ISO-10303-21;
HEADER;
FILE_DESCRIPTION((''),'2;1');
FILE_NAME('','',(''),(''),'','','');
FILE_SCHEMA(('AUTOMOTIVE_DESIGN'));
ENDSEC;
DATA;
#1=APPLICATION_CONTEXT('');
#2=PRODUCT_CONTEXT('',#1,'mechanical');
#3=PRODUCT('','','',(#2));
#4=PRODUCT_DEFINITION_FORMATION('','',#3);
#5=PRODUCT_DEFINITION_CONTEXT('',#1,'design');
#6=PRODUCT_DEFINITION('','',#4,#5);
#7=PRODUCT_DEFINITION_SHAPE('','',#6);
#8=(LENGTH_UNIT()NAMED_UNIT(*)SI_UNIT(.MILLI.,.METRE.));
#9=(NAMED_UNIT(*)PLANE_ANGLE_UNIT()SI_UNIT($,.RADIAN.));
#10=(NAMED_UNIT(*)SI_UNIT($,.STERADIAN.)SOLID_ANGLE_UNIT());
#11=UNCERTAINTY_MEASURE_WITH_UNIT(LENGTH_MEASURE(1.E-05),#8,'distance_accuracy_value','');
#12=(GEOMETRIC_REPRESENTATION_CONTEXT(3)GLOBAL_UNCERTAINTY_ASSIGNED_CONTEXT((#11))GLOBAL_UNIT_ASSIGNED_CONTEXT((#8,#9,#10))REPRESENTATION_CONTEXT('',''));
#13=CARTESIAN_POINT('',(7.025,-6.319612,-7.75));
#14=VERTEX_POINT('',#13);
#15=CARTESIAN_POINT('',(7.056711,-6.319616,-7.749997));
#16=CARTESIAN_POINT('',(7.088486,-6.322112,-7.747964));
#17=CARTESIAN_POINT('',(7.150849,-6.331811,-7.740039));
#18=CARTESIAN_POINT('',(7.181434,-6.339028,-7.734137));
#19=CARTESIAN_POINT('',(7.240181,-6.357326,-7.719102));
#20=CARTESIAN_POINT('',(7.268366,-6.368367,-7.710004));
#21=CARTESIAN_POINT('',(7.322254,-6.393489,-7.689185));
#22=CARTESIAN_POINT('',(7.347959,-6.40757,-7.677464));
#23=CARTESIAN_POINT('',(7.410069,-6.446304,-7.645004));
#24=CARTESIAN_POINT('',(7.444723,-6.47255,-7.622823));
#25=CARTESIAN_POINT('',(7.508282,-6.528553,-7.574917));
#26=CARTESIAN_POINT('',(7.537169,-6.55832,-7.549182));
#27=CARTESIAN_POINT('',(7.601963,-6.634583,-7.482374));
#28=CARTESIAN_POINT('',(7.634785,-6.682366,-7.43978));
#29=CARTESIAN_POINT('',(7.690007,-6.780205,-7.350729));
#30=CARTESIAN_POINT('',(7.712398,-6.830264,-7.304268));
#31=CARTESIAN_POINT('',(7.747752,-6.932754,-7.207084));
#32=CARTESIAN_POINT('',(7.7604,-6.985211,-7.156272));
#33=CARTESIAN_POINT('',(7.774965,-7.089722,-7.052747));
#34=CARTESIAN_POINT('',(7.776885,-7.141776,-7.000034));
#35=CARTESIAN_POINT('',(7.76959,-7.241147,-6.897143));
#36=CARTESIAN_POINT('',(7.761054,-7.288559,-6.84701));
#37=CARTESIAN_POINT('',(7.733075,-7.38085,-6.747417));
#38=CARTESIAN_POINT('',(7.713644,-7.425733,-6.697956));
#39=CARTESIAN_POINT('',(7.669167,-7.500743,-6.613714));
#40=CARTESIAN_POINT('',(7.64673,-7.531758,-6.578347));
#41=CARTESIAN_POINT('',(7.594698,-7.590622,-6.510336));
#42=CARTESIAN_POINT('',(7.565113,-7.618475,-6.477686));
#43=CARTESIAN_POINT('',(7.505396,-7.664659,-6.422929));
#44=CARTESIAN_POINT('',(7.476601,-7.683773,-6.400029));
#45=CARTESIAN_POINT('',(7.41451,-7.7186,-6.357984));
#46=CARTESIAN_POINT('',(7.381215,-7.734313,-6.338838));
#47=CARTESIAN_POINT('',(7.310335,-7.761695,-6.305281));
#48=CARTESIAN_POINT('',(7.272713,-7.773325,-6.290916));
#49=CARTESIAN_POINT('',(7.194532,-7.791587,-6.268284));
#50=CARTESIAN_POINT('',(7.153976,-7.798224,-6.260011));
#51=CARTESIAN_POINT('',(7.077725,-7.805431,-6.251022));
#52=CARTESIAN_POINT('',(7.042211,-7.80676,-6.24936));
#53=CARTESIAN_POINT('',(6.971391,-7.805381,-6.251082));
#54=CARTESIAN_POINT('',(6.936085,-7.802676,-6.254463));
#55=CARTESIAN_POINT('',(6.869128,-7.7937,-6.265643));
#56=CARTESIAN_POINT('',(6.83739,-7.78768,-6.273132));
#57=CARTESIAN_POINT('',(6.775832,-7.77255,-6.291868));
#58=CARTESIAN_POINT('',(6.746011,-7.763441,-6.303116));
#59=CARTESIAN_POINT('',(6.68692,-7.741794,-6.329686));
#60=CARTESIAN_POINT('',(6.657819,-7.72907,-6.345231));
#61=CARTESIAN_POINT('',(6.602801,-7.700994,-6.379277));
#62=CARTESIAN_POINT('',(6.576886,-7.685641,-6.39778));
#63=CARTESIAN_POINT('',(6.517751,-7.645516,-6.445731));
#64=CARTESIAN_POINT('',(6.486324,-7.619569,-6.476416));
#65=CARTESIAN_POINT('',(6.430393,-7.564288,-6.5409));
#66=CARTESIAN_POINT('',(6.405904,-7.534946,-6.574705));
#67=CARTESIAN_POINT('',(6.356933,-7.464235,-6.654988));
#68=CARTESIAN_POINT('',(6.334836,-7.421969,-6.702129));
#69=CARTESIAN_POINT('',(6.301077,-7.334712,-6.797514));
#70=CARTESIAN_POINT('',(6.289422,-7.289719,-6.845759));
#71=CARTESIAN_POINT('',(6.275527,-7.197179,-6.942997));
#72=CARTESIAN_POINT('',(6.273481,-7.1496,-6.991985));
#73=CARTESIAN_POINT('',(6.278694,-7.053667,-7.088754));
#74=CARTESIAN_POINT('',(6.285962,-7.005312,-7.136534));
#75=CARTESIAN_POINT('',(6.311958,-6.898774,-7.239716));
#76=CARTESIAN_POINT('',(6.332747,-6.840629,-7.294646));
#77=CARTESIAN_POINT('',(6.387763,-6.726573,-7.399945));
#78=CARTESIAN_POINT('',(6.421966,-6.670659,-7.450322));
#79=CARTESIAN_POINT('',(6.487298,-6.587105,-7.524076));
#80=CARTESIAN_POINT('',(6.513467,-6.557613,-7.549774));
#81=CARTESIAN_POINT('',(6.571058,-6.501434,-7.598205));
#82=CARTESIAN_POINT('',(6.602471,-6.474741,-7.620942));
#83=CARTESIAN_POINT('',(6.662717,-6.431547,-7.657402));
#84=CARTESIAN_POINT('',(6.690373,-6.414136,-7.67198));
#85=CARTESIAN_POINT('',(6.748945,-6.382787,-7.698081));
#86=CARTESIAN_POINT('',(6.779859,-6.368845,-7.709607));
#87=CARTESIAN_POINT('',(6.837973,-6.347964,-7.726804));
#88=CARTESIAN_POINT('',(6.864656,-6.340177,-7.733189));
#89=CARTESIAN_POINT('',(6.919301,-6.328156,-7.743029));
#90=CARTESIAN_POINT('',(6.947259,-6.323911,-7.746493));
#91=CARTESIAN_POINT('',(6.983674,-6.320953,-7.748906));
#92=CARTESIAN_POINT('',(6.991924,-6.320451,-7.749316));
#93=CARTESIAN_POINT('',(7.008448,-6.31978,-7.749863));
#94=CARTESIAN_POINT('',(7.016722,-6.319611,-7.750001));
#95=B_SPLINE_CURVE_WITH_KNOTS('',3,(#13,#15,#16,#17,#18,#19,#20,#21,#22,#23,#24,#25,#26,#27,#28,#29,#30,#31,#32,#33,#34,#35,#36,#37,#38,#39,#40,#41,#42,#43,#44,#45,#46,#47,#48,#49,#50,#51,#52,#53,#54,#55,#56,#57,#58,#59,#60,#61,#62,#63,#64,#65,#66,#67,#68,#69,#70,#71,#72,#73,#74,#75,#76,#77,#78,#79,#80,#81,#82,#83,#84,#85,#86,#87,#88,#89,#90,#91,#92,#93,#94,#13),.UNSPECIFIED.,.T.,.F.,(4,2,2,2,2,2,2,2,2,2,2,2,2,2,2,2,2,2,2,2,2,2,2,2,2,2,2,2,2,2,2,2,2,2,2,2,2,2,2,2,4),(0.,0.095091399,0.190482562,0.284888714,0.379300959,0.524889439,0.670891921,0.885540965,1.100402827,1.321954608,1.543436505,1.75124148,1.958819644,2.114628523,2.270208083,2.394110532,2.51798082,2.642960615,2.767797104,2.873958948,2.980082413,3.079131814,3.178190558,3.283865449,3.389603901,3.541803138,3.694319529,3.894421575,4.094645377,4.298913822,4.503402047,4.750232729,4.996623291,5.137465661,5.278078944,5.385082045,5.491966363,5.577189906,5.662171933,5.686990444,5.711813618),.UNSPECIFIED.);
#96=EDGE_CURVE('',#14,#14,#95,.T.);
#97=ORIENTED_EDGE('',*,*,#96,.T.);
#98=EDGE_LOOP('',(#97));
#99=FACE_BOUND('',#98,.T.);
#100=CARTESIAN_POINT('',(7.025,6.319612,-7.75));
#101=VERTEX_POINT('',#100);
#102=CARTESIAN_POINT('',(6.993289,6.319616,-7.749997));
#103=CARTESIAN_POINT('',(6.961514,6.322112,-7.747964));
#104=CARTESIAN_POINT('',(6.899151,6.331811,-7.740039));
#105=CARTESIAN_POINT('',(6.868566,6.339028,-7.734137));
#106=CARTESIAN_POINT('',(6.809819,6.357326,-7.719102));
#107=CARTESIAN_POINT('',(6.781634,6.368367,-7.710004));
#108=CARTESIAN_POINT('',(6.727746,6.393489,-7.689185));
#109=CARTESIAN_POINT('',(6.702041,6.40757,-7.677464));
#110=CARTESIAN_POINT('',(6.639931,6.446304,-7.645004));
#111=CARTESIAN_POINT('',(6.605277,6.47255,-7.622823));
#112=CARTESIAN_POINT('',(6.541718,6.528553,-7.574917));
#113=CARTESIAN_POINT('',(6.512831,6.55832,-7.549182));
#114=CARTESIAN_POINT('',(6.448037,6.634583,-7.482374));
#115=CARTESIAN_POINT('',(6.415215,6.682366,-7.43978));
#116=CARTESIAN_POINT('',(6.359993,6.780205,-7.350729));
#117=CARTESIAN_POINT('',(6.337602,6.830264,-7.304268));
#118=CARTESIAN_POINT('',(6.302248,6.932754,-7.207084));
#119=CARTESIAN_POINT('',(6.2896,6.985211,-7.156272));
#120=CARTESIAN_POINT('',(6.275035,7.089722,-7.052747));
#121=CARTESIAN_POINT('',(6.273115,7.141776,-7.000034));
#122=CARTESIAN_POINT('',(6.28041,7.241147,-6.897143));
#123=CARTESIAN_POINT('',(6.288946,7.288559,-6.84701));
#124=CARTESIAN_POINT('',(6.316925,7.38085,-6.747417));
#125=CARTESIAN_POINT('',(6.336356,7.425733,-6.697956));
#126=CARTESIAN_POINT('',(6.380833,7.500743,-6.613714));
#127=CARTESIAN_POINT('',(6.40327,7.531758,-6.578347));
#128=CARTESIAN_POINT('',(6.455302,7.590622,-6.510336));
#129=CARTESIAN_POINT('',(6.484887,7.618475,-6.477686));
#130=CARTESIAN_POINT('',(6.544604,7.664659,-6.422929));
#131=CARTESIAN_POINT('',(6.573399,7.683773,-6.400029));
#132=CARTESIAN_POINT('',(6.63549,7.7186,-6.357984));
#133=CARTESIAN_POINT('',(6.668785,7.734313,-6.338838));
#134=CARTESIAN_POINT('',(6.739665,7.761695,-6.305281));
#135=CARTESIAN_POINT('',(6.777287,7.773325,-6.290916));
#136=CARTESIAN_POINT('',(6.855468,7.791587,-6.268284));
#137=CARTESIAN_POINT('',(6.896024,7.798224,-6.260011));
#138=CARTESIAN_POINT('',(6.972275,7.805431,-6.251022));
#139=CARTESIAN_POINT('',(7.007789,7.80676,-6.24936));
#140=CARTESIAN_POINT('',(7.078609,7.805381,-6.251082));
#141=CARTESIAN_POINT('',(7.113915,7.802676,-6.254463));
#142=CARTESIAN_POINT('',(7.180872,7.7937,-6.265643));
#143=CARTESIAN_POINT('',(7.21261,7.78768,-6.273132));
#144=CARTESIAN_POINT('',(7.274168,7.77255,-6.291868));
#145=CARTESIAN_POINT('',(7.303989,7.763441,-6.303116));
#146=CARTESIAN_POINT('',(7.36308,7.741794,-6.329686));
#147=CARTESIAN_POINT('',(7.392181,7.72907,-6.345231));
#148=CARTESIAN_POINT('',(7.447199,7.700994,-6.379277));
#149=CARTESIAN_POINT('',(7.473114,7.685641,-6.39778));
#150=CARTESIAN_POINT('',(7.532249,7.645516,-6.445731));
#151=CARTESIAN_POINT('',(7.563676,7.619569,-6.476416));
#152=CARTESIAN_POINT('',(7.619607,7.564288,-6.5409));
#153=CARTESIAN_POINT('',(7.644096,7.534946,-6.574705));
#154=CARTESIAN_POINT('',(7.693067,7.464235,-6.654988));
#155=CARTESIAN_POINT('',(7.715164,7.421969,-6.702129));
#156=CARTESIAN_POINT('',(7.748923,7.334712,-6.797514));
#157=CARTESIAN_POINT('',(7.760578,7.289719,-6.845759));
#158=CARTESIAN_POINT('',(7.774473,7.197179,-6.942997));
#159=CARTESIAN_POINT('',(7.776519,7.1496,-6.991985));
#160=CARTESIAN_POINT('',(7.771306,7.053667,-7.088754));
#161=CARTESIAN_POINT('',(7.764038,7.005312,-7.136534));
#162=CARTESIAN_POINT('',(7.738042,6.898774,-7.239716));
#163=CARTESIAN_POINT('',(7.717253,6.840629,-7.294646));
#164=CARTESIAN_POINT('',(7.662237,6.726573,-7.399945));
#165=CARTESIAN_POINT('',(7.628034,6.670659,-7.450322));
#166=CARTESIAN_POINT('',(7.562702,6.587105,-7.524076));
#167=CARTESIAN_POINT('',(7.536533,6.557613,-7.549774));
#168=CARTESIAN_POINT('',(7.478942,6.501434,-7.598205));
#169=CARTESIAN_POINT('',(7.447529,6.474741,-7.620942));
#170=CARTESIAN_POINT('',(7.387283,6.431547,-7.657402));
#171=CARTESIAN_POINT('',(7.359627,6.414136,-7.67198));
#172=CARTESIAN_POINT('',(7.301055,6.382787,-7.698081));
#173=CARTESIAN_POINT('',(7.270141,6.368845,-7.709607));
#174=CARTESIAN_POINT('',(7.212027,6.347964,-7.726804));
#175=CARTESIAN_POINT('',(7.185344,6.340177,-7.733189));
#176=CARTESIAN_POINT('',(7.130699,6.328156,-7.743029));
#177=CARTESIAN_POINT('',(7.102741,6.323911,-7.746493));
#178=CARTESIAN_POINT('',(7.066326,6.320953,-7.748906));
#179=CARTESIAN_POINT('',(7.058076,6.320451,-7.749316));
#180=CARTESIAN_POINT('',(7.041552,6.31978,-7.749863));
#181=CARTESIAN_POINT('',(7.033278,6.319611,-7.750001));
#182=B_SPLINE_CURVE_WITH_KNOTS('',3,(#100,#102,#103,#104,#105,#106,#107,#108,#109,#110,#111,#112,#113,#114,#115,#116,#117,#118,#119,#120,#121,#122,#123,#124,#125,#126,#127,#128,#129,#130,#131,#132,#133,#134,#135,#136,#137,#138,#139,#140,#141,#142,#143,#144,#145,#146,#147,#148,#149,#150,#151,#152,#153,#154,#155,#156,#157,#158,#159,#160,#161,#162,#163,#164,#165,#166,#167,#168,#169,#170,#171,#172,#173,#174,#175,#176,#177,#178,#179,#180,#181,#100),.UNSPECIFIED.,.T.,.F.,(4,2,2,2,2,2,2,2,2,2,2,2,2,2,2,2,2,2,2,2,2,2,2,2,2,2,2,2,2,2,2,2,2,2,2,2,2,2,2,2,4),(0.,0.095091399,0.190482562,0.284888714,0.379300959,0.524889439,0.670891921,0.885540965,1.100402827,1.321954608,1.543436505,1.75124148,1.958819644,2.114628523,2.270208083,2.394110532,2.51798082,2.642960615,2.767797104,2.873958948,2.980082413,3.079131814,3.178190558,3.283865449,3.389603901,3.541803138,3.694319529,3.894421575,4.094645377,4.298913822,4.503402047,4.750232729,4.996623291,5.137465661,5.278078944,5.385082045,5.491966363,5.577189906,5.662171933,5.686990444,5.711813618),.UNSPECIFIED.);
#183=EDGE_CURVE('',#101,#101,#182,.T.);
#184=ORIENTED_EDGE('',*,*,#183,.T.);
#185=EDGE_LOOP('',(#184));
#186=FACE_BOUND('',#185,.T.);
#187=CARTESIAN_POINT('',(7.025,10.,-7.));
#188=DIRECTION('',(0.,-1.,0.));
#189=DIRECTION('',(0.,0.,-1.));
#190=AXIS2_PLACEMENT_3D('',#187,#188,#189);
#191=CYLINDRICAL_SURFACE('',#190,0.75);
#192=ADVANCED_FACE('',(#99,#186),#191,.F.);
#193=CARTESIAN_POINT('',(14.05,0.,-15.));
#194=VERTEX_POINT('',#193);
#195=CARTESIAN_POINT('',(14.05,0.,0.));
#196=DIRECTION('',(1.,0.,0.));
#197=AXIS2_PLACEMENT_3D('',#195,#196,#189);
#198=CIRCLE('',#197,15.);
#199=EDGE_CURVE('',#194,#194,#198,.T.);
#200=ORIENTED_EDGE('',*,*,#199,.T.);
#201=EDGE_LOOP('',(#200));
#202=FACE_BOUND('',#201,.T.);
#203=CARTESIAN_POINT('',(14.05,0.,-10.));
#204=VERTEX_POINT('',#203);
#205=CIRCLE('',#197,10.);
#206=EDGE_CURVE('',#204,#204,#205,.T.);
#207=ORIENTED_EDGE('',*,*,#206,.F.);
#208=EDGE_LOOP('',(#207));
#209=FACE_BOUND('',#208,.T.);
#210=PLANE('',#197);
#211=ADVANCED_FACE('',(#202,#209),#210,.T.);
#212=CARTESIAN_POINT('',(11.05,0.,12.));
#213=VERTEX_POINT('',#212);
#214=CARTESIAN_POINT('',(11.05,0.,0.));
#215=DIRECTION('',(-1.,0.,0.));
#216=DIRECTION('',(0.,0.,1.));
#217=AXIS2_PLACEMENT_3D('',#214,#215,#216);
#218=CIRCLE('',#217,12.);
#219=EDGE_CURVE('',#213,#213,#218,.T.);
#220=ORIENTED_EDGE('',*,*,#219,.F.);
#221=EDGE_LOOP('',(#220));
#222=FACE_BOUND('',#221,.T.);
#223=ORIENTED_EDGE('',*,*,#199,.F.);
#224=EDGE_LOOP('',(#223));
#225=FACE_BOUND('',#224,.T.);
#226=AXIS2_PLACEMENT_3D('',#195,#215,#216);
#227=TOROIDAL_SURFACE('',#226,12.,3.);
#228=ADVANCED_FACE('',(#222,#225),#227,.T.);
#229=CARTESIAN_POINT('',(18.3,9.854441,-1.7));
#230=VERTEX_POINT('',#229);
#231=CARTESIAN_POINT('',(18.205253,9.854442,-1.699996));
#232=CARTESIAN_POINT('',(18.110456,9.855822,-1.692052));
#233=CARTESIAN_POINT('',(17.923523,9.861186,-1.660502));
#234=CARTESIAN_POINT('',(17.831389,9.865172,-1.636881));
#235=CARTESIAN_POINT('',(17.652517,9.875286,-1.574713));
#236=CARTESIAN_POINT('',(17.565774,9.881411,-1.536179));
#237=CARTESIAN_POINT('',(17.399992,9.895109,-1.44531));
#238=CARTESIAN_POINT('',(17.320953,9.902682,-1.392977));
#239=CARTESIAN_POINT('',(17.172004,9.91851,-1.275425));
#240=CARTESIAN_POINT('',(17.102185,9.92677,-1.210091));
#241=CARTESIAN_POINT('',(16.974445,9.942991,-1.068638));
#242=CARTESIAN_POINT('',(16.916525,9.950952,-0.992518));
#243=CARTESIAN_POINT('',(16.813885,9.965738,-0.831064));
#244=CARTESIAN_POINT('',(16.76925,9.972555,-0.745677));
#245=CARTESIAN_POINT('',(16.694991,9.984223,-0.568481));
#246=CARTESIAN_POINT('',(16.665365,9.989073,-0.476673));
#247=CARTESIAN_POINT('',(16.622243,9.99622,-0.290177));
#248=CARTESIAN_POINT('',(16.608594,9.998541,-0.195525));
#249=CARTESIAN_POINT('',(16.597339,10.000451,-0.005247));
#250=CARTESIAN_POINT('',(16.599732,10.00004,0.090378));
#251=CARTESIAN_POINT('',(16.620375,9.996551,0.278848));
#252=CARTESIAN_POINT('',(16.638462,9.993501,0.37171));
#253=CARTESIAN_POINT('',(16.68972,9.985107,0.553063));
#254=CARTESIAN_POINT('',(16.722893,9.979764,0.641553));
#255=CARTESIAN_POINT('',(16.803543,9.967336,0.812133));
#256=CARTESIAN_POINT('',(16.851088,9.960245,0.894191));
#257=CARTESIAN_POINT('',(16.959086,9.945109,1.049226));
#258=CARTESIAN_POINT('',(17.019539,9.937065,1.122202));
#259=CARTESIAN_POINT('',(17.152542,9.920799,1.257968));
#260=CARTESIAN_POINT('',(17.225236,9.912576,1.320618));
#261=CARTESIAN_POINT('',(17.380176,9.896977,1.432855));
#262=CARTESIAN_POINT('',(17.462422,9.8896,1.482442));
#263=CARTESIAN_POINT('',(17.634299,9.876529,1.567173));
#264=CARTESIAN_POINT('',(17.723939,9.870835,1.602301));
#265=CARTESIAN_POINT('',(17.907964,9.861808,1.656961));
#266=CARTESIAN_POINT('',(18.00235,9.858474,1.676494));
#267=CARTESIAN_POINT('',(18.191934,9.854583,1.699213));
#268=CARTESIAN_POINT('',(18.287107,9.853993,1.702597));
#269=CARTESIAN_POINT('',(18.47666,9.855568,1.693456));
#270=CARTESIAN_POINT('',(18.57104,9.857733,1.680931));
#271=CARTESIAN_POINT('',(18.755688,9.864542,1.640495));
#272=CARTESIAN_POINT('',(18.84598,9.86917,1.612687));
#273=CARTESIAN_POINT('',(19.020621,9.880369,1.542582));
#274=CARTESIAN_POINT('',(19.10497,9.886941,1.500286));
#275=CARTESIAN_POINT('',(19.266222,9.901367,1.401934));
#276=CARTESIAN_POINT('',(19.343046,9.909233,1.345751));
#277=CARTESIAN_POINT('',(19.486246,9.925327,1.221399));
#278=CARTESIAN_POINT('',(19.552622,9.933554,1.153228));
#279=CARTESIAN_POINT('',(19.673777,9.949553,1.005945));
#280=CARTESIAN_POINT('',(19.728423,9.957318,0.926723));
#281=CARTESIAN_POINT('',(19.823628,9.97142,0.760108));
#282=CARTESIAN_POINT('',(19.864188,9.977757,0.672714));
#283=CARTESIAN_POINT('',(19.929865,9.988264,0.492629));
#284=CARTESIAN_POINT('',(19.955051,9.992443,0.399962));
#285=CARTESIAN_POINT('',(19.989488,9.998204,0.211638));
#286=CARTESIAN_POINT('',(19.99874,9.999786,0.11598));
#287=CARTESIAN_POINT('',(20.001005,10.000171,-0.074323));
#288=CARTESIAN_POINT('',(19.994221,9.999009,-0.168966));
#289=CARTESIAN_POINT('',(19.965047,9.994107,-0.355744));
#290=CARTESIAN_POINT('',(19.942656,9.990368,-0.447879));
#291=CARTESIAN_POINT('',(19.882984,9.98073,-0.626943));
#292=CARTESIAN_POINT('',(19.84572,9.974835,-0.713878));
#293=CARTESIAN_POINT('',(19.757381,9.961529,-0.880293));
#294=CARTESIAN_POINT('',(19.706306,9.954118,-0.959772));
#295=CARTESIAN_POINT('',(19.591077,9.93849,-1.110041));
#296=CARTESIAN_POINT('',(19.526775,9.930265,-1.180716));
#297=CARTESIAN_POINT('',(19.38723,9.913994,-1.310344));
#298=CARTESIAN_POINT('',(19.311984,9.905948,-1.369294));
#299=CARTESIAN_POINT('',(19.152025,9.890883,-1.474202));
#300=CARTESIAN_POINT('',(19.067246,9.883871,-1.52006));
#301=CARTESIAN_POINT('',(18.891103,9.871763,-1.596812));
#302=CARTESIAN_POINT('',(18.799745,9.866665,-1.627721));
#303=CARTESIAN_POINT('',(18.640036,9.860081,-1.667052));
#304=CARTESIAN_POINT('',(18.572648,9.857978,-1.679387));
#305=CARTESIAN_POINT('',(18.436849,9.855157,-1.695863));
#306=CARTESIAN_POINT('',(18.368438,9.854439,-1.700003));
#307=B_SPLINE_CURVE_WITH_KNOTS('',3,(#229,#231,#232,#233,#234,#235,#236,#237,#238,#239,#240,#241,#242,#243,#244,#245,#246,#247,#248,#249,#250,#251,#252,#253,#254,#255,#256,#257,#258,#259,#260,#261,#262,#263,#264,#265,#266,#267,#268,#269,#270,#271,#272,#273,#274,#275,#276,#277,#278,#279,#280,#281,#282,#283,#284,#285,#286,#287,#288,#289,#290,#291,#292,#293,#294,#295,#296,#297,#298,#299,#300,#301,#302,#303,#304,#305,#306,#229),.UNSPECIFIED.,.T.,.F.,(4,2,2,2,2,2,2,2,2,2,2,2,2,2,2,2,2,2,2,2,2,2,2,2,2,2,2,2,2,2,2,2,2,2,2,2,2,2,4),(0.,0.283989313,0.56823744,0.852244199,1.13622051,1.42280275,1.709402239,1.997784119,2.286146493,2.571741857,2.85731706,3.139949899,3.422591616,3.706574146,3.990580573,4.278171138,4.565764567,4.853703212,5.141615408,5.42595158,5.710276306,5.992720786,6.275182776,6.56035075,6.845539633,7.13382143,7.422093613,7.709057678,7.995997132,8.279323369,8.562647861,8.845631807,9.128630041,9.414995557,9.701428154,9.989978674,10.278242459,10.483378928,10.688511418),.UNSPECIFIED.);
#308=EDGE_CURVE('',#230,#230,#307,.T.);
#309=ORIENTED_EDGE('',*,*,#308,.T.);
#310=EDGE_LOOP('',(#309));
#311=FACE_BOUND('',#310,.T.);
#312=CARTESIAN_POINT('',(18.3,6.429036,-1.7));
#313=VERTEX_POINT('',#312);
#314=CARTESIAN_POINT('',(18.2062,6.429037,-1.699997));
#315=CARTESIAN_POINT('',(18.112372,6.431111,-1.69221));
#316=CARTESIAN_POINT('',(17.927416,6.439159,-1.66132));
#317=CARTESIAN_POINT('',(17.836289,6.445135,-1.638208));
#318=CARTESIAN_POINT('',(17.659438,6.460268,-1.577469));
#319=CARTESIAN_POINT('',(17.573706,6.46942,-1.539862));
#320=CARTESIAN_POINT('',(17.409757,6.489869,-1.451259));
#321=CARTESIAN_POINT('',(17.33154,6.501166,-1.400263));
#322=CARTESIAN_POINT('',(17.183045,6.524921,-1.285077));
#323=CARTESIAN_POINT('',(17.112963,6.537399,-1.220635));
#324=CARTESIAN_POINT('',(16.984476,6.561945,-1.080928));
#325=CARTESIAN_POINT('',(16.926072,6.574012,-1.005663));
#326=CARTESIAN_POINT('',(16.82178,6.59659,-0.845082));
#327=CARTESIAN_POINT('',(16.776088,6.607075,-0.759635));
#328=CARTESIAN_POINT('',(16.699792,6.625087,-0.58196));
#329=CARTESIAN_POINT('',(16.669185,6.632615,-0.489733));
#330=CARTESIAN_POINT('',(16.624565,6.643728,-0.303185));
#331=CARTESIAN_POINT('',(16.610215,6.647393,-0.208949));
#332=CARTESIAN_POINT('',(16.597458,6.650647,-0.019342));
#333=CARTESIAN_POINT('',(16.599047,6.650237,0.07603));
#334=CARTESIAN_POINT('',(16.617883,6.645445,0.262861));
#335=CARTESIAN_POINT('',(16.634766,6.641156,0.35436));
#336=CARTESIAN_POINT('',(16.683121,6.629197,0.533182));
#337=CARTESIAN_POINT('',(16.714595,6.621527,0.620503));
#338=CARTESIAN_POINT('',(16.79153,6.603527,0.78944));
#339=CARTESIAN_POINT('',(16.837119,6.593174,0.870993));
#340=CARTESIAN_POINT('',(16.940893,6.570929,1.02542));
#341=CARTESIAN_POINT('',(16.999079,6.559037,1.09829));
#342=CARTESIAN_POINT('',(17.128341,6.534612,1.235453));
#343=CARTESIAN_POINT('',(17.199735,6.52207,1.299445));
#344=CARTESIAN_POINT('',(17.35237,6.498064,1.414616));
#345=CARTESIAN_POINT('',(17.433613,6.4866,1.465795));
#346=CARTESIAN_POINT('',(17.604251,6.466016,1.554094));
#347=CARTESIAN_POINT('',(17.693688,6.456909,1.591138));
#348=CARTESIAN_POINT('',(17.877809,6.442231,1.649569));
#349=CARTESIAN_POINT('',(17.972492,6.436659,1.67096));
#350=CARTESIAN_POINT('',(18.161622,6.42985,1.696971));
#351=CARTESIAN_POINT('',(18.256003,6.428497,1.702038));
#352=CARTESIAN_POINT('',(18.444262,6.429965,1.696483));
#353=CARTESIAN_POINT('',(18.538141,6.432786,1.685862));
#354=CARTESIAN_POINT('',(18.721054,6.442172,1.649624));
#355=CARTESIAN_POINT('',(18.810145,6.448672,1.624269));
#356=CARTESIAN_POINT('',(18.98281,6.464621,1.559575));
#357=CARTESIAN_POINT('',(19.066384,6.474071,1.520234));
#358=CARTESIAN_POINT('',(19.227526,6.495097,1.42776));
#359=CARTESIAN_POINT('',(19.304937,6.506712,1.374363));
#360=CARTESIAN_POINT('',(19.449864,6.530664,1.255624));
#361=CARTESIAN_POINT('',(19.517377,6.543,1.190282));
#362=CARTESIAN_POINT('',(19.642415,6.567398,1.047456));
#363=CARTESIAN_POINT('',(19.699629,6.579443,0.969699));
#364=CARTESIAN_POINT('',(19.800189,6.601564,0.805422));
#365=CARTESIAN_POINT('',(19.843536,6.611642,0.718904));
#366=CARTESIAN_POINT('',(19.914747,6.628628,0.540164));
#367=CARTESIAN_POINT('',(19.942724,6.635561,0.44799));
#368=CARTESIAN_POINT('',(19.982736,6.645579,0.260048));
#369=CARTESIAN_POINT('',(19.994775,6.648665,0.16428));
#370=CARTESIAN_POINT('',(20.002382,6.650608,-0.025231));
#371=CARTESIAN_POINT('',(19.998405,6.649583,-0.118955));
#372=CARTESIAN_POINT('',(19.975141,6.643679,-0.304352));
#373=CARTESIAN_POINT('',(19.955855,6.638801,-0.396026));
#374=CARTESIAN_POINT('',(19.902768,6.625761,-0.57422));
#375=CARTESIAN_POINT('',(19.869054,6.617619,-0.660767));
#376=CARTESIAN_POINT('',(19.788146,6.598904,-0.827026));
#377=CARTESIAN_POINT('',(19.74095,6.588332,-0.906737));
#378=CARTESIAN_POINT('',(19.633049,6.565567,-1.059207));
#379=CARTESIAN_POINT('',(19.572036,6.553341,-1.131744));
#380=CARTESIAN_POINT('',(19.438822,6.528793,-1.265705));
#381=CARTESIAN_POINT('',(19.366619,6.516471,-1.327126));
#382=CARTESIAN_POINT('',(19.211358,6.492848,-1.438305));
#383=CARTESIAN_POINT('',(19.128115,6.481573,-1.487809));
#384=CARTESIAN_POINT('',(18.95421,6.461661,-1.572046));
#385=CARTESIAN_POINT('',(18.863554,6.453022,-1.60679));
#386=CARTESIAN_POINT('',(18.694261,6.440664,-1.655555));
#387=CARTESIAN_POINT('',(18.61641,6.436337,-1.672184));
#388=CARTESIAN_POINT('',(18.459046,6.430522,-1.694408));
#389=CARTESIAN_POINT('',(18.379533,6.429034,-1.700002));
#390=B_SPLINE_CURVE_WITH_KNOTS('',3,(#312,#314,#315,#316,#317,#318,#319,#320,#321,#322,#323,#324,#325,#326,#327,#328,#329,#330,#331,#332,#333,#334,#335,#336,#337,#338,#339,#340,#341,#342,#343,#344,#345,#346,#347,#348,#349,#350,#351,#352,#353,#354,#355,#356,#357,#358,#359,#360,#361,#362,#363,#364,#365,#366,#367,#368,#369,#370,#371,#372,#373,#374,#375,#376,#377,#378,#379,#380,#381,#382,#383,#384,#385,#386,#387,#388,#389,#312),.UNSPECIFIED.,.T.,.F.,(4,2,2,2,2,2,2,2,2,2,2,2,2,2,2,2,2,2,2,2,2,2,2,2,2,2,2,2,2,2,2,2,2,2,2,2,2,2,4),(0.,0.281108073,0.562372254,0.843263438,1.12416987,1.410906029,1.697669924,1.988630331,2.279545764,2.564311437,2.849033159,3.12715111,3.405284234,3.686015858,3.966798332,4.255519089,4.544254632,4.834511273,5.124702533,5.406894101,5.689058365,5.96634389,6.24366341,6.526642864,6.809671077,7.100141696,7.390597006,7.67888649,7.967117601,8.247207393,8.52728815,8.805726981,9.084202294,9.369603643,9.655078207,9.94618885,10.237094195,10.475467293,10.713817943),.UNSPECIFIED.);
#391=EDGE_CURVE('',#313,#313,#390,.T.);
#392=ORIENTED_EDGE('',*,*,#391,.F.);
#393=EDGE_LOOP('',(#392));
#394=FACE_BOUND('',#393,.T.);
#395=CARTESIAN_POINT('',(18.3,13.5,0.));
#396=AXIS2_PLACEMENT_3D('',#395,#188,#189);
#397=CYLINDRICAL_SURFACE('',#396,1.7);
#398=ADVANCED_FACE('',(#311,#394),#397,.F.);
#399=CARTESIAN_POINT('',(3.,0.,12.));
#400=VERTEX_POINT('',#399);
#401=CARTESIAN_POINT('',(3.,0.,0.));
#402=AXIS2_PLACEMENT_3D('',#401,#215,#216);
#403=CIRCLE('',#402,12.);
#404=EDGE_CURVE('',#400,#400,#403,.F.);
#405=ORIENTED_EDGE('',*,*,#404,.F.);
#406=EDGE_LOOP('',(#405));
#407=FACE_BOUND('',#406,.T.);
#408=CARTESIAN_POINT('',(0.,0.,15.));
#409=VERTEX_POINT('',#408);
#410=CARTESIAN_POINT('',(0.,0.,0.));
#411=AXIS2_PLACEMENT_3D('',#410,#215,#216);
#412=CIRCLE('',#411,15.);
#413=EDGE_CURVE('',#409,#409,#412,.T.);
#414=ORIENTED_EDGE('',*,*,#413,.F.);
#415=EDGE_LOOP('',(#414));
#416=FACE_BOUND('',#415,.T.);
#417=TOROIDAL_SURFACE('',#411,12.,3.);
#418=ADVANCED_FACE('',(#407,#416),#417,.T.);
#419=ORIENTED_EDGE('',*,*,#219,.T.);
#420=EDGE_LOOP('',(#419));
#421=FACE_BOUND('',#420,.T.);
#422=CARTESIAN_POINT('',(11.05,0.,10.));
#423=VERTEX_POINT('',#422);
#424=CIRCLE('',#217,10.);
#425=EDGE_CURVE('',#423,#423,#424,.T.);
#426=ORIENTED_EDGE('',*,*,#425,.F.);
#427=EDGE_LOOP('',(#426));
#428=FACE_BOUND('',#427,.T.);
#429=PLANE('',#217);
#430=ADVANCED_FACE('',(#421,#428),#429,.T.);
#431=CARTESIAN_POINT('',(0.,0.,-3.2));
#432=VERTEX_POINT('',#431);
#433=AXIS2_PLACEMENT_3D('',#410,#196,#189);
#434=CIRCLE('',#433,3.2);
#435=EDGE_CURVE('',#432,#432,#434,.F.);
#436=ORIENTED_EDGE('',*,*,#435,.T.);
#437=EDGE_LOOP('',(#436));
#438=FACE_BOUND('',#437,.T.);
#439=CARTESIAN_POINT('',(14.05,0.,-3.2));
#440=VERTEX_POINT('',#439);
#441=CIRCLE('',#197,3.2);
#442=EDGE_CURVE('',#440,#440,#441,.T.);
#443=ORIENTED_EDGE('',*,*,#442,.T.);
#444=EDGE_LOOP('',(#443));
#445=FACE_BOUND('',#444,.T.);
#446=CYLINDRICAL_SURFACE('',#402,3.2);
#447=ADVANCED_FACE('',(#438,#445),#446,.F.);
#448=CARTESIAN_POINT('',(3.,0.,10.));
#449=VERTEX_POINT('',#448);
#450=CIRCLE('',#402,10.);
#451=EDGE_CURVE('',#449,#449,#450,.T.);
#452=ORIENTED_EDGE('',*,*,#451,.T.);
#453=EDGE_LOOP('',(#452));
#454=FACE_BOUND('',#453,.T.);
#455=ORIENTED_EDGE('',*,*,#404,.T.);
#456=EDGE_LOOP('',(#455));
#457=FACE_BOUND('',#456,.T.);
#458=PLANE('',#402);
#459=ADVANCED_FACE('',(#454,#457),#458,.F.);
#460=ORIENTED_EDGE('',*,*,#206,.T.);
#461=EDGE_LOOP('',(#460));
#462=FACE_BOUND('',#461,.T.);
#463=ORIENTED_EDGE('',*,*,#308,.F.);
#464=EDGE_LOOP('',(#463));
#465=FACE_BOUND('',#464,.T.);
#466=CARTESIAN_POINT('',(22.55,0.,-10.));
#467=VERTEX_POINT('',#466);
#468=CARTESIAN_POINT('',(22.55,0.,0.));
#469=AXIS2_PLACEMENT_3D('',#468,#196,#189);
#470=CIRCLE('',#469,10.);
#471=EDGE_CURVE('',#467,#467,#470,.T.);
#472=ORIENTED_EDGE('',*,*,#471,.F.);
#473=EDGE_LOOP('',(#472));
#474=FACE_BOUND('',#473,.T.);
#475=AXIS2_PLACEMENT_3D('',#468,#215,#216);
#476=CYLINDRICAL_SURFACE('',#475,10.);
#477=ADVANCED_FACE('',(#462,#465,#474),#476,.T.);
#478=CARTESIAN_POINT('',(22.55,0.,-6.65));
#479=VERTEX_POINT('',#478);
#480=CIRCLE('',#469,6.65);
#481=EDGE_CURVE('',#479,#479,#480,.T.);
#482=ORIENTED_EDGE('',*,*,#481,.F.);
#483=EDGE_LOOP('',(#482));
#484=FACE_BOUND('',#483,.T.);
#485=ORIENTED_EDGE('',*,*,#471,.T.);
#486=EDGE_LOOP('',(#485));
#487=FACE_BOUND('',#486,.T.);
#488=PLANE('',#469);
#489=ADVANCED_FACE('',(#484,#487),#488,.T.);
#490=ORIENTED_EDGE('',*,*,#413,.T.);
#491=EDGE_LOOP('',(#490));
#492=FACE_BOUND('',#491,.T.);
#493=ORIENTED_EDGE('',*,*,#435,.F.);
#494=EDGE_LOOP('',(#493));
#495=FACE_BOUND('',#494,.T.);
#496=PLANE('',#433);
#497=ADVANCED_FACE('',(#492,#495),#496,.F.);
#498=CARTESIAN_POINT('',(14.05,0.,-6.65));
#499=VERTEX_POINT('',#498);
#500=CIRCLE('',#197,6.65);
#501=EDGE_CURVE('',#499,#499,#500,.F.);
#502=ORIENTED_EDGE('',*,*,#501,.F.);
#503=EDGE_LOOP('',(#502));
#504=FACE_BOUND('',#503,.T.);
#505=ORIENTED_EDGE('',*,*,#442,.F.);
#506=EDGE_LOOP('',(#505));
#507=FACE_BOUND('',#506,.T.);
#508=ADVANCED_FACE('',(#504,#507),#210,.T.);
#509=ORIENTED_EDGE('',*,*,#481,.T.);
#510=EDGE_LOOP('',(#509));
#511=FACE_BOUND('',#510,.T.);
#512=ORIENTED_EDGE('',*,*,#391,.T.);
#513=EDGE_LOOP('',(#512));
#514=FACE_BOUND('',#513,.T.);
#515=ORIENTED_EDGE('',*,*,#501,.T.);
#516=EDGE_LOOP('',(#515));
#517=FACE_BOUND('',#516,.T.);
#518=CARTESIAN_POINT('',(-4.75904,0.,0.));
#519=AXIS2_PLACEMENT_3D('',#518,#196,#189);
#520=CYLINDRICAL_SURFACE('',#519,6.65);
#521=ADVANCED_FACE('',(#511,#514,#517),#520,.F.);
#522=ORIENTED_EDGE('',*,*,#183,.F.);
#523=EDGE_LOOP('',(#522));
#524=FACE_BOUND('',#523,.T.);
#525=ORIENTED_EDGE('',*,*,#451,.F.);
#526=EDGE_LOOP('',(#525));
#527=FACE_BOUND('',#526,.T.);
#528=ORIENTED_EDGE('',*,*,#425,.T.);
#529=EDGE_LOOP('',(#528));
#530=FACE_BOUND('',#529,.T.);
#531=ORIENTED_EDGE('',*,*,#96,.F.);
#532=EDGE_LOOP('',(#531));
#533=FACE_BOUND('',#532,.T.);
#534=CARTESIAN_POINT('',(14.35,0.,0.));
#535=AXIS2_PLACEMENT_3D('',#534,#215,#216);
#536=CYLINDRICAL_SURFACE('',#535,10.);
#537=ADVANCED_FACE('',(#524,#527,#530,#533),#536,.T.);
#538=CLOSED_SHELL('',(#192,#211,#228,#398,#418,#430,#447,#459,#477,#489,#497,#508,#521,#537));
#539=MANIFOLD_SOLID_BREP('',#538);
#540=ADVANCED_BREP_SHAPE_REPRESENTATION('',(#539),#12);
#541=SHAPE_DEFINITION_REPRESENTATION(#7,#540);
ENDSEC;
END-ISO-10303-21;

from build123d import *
from build123d.topology import SkipClean

# Parameters (mm, degrees)
EXTRUDE_3_DEPTH          = 14.35
EXTRUDE_START            = -3
EXTRUDE_7_DEPTH          = 3
EXTRUDE_8_DEPTH          = 3
EXTRUDE_START_2          = 10
EXTRUDE_9_DEPTH          = 10
EXTRUDE_10_DEPTH         = 10
CUT_EXTRUDE_1_DEPTH      = 10
CUT_EXTRUDE_2_DEPTH      = 14
FILLET_1_R               = 5
SKETCH_10_W              = 10.354719005
SKETCH_10_H              = 30
SKETCH_10_W_2            = 10.898600502
CUT_EXTRUDE_3_DEPTH      = 14
CUT_EXTRUDE_START        = -11.35
SKETCH_11_R              = 6.6
CUT_EXTRUDE_4_DEPTH      = 11.35
EXTRUDE_START_3          = -14.35
SKETCH_12_R              = 10
SKETCH_12_R_2            = 6.6
EXTRUDE_11_DEPTH         = 14.35
SKETCH_13_R              = 15
SKETCH_13_R_2            = 10
EXTRUDE_12_DEPTH         = 3
SKETCH_14_R              = 15
SKETCH_14_R_2            = 3.2
EXTRUDE_13_DEPTH         = 3
CUT_EXTRUDE_START_2      = -0.3
SKETCH_17_R              = 15
CUT_EXTRUDE_5_DEPTH      = 0.3
EXTRUDE_START_4          = 0.3
SKETCH_18_R              = 15
SKETCH_18_R_2            = 10
EXTRUDE_14_DEPTH         = 0.3
CUT_EXTRUDE_6_DEPTH      = 19.3
SKETCH_20_R              = 10
SKETCH_20_R_2            = 3.2
EXTRUDE_15_DEPTH         = 11.05
SKETCH_21_R              = 10
SKETCH_21_R_2            = 6.6
EXTRUDE_16_DEPTH         = 8.5
CUT_EXTRUDE_7_DEPTH      = 13.5
FILLET_2_R               = 3
CUT_EXTRUDE_9_DEPTH      = 10
CUT_EXTRUDE_9_DEPTH_BACK = 10
SKETCH_23_R              = 0.75
CUT_EXTRUDE_10_REACH     = 32.96
SKETCH_25_R              = 6.65


with BuildPart() as part:
    # Эскиз1 → Бобышка-Вытянуть3 (new body)
    with BuildSketch(Plane(origin=(0, 0, 0), x_dir=(0, 0, -1), z_dir=(1, 0, 0))):
        with BuildLine():
            ThreePointArc((-6.6, 0), (0, 6.6), (6.6, 0))
            Line((6.6, 0), (10, 0))
            ThreePointArc((10, 0), (0, 10), (-10, 0))
            Line((-10, 0), (-6.6, 0))
        make_face()
    extrude(amount=EXTRUDE_3_DEPTH)

    # Эскиз3 → Бобышка-Вытянуть7 (add)
    with BuildSketch(Plane(origin=(14.35, 0, 0), x_dir=(0, 0, -1), z_dir=(1, 0, 0)).offset(EXTRUDE_START)):
        with BuildLine():
            ThreePointArc((15, 0), (0, 15), (-15, 0))
            Line((-15, 0), (-10, 0))
            ThreePointArc((-10, 0), (0, 10), (10, 0))
            Line((10, 0), (15, 0))
        make_face()
        with BuildLine():
            ThreePointArc((6.6, 0), (0, 6.6), (-6.6, 0))
            Line((-6.6, 0), (-3.2, 0))
            ThreePointArc((-3.2, 0), (0, 3.2), (3.2, 0))
            Line((3.2, 0), (6.6, 0))
        make_face()
    extrude(amount=EXTRUDE_7_DEPTH)

    # Эскиз5 → Бобышка-Вытянуть8 (add)
    with BuildSketch(Plane.ZY):
        with BuildLine():
            ThreePointArc((15, 0), (0, 15), (-15, 0))
            Line((-15, 0), (-10, 0))
            ThreePointArc((-10, 0), (0, 10), (10, 0))
            Line((10, 0), (15, 0))
        make_face()
        with BuildLine():
            ThreePointArc((6.6, 0), (0, 6.6), (-6.6, 0))
            Line((-6.6, 0), (-3.2, 0))
            ThreePointArc((-3.2, 0), (0, 3.2), (3.2, 0))
            Line((3.2, 0), (6.6, 0))
        make_face()
    extrude(amount=-EXTRUDE_8_DEPTH)

    # Эскиз6 → Бобышка-Вытянуть9 (add)
    with BuildSketch(Plane.ZY.offset(EXTRUDE_START_2)):
        with BuildLine():
            ThreePointArc((-6.6, 0), (-6.41716127, 1.542738227), (-5.878775383, 3))
            Line((-5.878775383, 3), (-6.6, 3))
            Line((-6.6, 3), (-14.696938457, 3))
            Line((-14.696938457, 3), (-14.696938457, 0))
            Line((-14.696938457, 0), (-6.6, 0))
        make_face()
        with BuildLine():
            ThreePointArc((-3.2, 0), (-2.627105745, 1.827105745), (-1.113552873, 3))
            Line((-1.113552873, 3), (-5.878775383, 3))
            ThreePointArc((-5.878775383, 3), (-6.41716127, 1.542738227), (-6.6, 0))
            Line((-6.6, 0), (-3.2, 0))
        make_face()
        with BuildLine():
            Line((-5.878775383, 3), (-1.113552873, 3))
            ThreePointArc((-1.113552873, 3), (0, 3.2), (1.113552873, 3))
            Line((1.113552873, 3), (5.878775383, 3))
            ThreePointArc((5.878775383, 3), (0, 6.6), (-5.878775383, 3))
        make_face()
        with BuildLine():
            Line((5.878775383, 3), (1.113552873, 3))
            ThreePointArc((1.113552873, 3), (2.627105745, 1.827105745), (3.2, 0))
            Line((3.2, 0), (6.6, 0))
            ThreePointArc((6.6, 0), (6.41716127, 1.542738227), (5.878775383, 3))
        make_face()
        with BuildLine():
            Line((14.696938457, 3), (5.878775383, 3))
            ThreePointArc((5.878775383, 3), (6.41716127, 1.542738227), (6.6, 0))
            Line((6.6, 0), (14.696938457, 0))
            Line((14.696938457, 0), (14.696938457, 3))
        make_face()
    extrude(amount=-EXTRUDE_9_DEPTH)

    # Эскиз7 → Бобышка-Вытянуть10 (add)
    with BuildSketch(Plane(origin=(14.35, 0, 0), x_dir=(0, 0, -1), z_dir=(1, 0, 0))):
        with BuildLine():
            Line((6.6, 0), (14.696938457, 0))
            Line((14.696938457, 0), (14.696938457, 3))
            Line((14.696938457, 3), (5.878775383, 3))
            ThreePointArc((5.878775383, 3), (6.41716127, 1.542738227), (6.6, 0))
        make_face()
        with BuildLine():
            Line((3.2, 0), (6.6, 0))
            ThreePointArc((6.6, 0), (6.41716127, 1.542738227), (5.878775383, 3))
            ThreePointArc((5.878775383, 3), (0, 6.6), (-5.878775383, 3))
            ThreePointArc((-5.878775383, 3), (-6.41716127, 1.542738227), (-6.6, 0))
            Line((-6.6, 0), (-3.2, 0))
            ThreePointArc((-3.2, 0), (0, 3.2), (3.2, 0))
        make_face()
        with BuildLine():
            Line((-14.696938457, 0), (-6.6, 0))
            ThreePointArc((-6.6, 0), (-6.41716127, 1.542738227), (-5.878775383, 3))
            Line((-5.878775383, 3), (-14.696938457, 3))
            Line((-14.696938457, 3), (-14.696938457, 0))
        make_face()
    extrude(amount=EXTRUDE_10_DEPTH)

    # Эскиз8 → Вырез-Вытянуть1 (cut)
    with BuildSketch(Plane(origin=(0, 3, 0), x_dir=(1, 0, 0), z_dir=(0, 1, 0))):
        with BuildLine():
            ThreePointArc((-5, 11.98785692), (-6.7, 10.28785692), (-5, 8.58785692))
            Line((-5, 8.58785692), (-5, 11.98785692))
        make_face()
        with BuildLine():
            Line((-5, 11.98785692), (-5, 8.58785692))
            ThreePointArc((-5, 8.58785692), (-3.797918472, 9.085775392), (-3.3, 10.28785692))
            ThreePointArc((-3.3, 10.28785692), (-3.797918472, 11.489938448), (-5, 11.98785692))
        make_face()
        with BuildLine():
            ThreePointArc((21.05, 10.28785692), (20.552081528, 11.489938448), (19.35, 11.98785692))
            Line((19.35, 11.98785692), (19.35, 8.58785692))
            ThreePointArc((19.35, 8.58785692), (20.552081528, 9.085775392), (21.05, 10.28785692))
        make_face()
        with BuildLine():
            Line((19.35, 8.58785692), (19.35, 11.98785692))
            ThreePointArc((19.35, 11.98785692), (17.65, 10.28785692), (19.35, 8.58785692))
        make_face()
        with BuildLine():
            ThreePointArc((21.05, -10.28785692), (20.552081528, -9.085775392), (19.35, -8.58785692))
            Line((19.35, -8.58785692), (19.35, -11.98785692))
            ThreePointArc((19.35, -11.98785692), (20.552081528, -11.489938448), (21.05, -10.28785692))
        make_face()
        with BuildLine():
            Line((19.35, -11.98785692), (19.35, -8.58785692))
            ThreePointArc((19.35, -8.58785692), (17.65, -10.28785692), (19.35, -11.98785692))
        make_face()
        with BuildLine():
            ThreePointArc((-3.3, -10.28785692), (-3.797918472, -9.085775392), (-5, -8.58785692))
            Line((-5, -8.58785692), (-5, -11.98785692))
            ThreePointArc((-5, -11.98785692), (-3.797918472, -11.489938448), (-3.3, -10.28785692))
        make_face()
        with BuildLine():
            Line((-5, -11.98785692), (-5, -8.58785692))
            ThreePointArc((-5, -8.58785692), (-6.7, -10.28785692), (-5, -11.98785692))
        make_face()
    extrude(amount=-CUT_EXTRUDE_1_DEPTH, mode=Mode.SUBTRACT)

    # Эскиз9 → Вырез-Вытянуть2 (cut)
    with BuildSketch(Plane.XZ):
        with BuildLine():
            ThreePointArc((8.875, 0), (8.377081528, 1.202081528), (7.175, 1.7))
            Line((7.175, 1.7), (7.175, -1.7))
            ThreePointArc((7.175, -1.7), (8.377081528, -1.202081528), (8.875, 0))
        make_face()
        with BuildLine():
            Line((7.175, -1.7), (7.175, 1.7))
            ThreePointArc((7.175, 1.7), (5.475, 0), (7.175, -1.7))
        make_face()
    extrude(amount=-CUT_EXTRUDE_2_DEPTH, mode=Mode.SUBTRACT)

    # Скругление1
    fillet_1_edges = [part.edges().sort_by_distance(p)[0] for p in [
        (24.35, 1.5, -14.696938457),
        (-10, 1.5, 14.696938457),
        (-10, 1.5, -14.696938457),
        (24.35, 1.5, 14.696938457),
    ]]
    fillet(fillet_1_edges, radius=FILLET_1_R)

    # Эскиз10 → Вырез-Вытянуть3 (cut)
    with BuildSketch(Plane.XZ):
        with Locations((-5.177359503, 0)):
            Rectangle(SKETCH_10_W, SKETCH_10_H)
        with Locations((19.799300251, 0)):
            Rectangle(SKETCH_10_W_2, SKETCH_10_H)
    extrude(amount=-CUT_EXTRUDE_3_DEPTH, mode=Mode.SUBTRACT)

    # Эскиз11 → Вырез-Вытянуть4 (cut)
    with SkipClean():  # the faces are left unmerged after this step: merging them gives an invalid solid
        with BuildSketch(Plane(origin=(14.35, 0, 0), x_dir=(0, 0, -1), z_dir=(1, 0, 0)).offset(CUT_EXTRUDE_START)):
            Circle(SKETCH_11_R)
        extrude(amount=CUT_EXTRUDE_4_DEPTH, mode=Mode.SUBTRACT)

    # Эскиз12 → Бобышка-Вытянуть11 (add)
    with BuildSketch(Plane(origin=(14.35, 0, 0), x_dir=(0, 0, -1), z_dir=(1, 0, 0)).offset(EXTRUDE_START_3)):
        with Locations(Location((0, 0, 0), (0, 0, 180))):
            Circle(SKETCH_12_R)
        Circle(SKETCH_12_R_2, mode=Mode.SUBTRACT)
    extrude(amount=EXTRUDE_11_DEPTH)

    # Эскиз13 → Бобышка-Вытянуть12 (add)
    with BuildSketch(Plane(origin=(14.35, 0, 0), x_dir=(0, 0, -1), z_dir=(1, 0, 0)).offset(EXTRUDE_START)):
        Circle(SKETCH_13_R)
        Circle(SKETCH_13_R_2, mode=Mode.SUBTRACT)
    extrude(amount=EXTRUDE_12_DEPTH)

    # Эскиз14 → Бобышка-Вытянуть13 (add)
    with SkipClean():  # the faces are left unmerged after this step: merging them gives an invalid solid
        with BuildSketch(Plane.ZY):
            with Locations(Location((0, 0, 0), (0, 0, 180))):
                Circle(SKETCH_14_R)
            Circle(SKETCH_14_R_2, mode=Mode.SUBTRACT)
        extrude(amount=-EXTRUDE_13_DEPTH)

    # Эскиз17 → Вырез-Вытянуть5 (cut)
    with SkipClean():  # the faces are left unmerged after this step: merging them gives an invalid solid
        with BuildSketch(Plane(origin=(14.35, 0, 0), x_dir=(0, 0, -1), z_dir=(1, 0, 0)).offset(CUT_EXTRUDE_START_2)):
            Circle(SKETCH_17_R)
        extrude(amount=CUT_EXTRUDE_5_DEPTH, mode=Mode.SUBTRACT)

    # Эскиз18 → Бобышка-Вытянуть14 (add)
    with SkipClean():  # the faces are left unmerged after this step: merging them gives an invalid solid
        with BuildSketch(Plane.ZY.offset(-11.35).offset(EXTRUDE_START_4)):
            with Locations(Location((0, 0, 0), (0, 0, 180))):
                Circle(SKETCH_18_R)
            Circle(SKETCH_18_R_2, mode=Mode.SUBTRACT)
        extrude(amount=-EXTRUDE_14_DEPTH)

    # Эскиз19 → Вырез-Вытянуть6 (cut)
    with BuildSketch(Plane(origin=(0, 0, 0), x_dir=(1, 0, 0), z_dir=(0, 1, 0))):
        with BuildLine():
            ThreePointArc((8.725, 0), (7.025, 1.7), (5.325, 0))
            Line((5.325, 0), (8.725, 0))
        make_face()
        with BuildLine():
            Line((8.725, 0), (5.325, 0))
            ThreePointArc((5.325, 0), (7.025, -1.7), (8.725, 0))
        make_face()
    extrude(amount=CUT_EXTRUDE_6_DEPTH, mode=Mode.SUBTRACT)

    # Эскиз20 → Бобышка-Вытянуть15 (add)
    with BuildSketch(Plane(origin=(3, 0, 0), x_dir=(0, 0, -1), z_dir=(1, 0, 0))):
        with Locations(Location((0, 0, 0), (0, 0, 180))):
            Circle(SKETCH_20_R)
        Circle(SKETCH_20_R_2, mode=Mode.SUBTRACT)
    extrude(amount=EXTRUDE_15_DEPTH)

    # Эскиз21 → Бобышка-Вытянуть16 (add)
    with BuildSketch(Plane(origin=(14.05, 0, 0), x_dir=(0, 0, -1), z_dir=(1, 0, 0))):
        with Locations(Location((0, 0, 0), (0, 0, 180))):
            Circle(SKETCH_21_R)
        Circle(SKETCH_21_R_2, mode=Mode.SUBTRACT)
    extrude(amount=EXTRUDE_16_DEPTH)

    # Эскиз22 → Вырез-Вытянуть7 (cut)
    with BuildSketch(Plane(origin=(0, 0, 0), x_dir=(1, 0, 0), z_dir=(0, 1, 0))):
        with BuildLine():
            ThreePointArc((16.6, 0), (18.3, -1.7), (20, 0))
            Line((20, 0), (16.6, 0))
        make_face()
        with BuildLine():
            Line((16.6, 0), (20, 0))
            ThreePointArc((20, 0), (18.3, 1.7), (16.6, 0))
        make_face()
    extrude(amount=CUT_EXTRUDE_7_DEPTH, mode=Mode.SUBTRACT)

    # Скругление2
    fillet_2_edges = [part.edges().sort_by_distance(p)[0] for p in [
        (11.05, 0, 15),
        (3, 0, -15),
    ]]
    fillet(fillet_2_edges, radius=FILLET_2_R - 0.0001)  # a hair under: the kernel refuses the full size

    # Эскиз23 → Вырез-Вытянуть9 (cut, two sides: drawn at the far end of the back side and taken through both)
    with BuildSketch(Plane(origin=(0, 0, 0), x_dir=(1, 0, 0), z_dir=(0, 1, 0)).offset(-CUT_EXTRUDE_9_DEPTH_BACK)):
        with Locations(Location((7.025, 7, 0), (0, 0, 90))):
            Circle(SKETCH_23_R)
    extrude(amount=CUT_EXTRUDE_9_DEPTH + CUT_EXTRUDE_9_DEPTH_BACK, mode=Mode.SUBTRACT)

    # Вырез-Вытянуть10: up to this face of the body (flat: up to its plane)
    cut_extrude_10_end = Plane(part.part.faces().sort_by_distance((14.05, 0, 6.41332381))[0])
    # Эскиз25 → Вырез-Вытянуть10 (cut, up to the picked face)
    with BuildSketch(Plane(origin=(22.55, 0, 0), x_dir=(0, 0, -1), z_dir=(1, 0, 0)), mode=Mode.PRIVATE) as cut_extrude_10_sk1:
        Circle(SKETCH_25_R)
    cut_extrude_10_tool1 = split(extrude(cut_extrude_10_sk1.sketch, amount=-CUT_EXTRUDE_10_REACH, mode=Mode.PRIVATE), bisect_by=cut_extrude_10_end, keep=Keep.BOTH, mode=Mode.PRIVATE)
    add(cut_extrude_10_tool1.solids().sort_by(Axis((22.55, 0, 0), (-1, 0, 0)))[0], mode=Mode.SUBTRACT)


solid = part.part
